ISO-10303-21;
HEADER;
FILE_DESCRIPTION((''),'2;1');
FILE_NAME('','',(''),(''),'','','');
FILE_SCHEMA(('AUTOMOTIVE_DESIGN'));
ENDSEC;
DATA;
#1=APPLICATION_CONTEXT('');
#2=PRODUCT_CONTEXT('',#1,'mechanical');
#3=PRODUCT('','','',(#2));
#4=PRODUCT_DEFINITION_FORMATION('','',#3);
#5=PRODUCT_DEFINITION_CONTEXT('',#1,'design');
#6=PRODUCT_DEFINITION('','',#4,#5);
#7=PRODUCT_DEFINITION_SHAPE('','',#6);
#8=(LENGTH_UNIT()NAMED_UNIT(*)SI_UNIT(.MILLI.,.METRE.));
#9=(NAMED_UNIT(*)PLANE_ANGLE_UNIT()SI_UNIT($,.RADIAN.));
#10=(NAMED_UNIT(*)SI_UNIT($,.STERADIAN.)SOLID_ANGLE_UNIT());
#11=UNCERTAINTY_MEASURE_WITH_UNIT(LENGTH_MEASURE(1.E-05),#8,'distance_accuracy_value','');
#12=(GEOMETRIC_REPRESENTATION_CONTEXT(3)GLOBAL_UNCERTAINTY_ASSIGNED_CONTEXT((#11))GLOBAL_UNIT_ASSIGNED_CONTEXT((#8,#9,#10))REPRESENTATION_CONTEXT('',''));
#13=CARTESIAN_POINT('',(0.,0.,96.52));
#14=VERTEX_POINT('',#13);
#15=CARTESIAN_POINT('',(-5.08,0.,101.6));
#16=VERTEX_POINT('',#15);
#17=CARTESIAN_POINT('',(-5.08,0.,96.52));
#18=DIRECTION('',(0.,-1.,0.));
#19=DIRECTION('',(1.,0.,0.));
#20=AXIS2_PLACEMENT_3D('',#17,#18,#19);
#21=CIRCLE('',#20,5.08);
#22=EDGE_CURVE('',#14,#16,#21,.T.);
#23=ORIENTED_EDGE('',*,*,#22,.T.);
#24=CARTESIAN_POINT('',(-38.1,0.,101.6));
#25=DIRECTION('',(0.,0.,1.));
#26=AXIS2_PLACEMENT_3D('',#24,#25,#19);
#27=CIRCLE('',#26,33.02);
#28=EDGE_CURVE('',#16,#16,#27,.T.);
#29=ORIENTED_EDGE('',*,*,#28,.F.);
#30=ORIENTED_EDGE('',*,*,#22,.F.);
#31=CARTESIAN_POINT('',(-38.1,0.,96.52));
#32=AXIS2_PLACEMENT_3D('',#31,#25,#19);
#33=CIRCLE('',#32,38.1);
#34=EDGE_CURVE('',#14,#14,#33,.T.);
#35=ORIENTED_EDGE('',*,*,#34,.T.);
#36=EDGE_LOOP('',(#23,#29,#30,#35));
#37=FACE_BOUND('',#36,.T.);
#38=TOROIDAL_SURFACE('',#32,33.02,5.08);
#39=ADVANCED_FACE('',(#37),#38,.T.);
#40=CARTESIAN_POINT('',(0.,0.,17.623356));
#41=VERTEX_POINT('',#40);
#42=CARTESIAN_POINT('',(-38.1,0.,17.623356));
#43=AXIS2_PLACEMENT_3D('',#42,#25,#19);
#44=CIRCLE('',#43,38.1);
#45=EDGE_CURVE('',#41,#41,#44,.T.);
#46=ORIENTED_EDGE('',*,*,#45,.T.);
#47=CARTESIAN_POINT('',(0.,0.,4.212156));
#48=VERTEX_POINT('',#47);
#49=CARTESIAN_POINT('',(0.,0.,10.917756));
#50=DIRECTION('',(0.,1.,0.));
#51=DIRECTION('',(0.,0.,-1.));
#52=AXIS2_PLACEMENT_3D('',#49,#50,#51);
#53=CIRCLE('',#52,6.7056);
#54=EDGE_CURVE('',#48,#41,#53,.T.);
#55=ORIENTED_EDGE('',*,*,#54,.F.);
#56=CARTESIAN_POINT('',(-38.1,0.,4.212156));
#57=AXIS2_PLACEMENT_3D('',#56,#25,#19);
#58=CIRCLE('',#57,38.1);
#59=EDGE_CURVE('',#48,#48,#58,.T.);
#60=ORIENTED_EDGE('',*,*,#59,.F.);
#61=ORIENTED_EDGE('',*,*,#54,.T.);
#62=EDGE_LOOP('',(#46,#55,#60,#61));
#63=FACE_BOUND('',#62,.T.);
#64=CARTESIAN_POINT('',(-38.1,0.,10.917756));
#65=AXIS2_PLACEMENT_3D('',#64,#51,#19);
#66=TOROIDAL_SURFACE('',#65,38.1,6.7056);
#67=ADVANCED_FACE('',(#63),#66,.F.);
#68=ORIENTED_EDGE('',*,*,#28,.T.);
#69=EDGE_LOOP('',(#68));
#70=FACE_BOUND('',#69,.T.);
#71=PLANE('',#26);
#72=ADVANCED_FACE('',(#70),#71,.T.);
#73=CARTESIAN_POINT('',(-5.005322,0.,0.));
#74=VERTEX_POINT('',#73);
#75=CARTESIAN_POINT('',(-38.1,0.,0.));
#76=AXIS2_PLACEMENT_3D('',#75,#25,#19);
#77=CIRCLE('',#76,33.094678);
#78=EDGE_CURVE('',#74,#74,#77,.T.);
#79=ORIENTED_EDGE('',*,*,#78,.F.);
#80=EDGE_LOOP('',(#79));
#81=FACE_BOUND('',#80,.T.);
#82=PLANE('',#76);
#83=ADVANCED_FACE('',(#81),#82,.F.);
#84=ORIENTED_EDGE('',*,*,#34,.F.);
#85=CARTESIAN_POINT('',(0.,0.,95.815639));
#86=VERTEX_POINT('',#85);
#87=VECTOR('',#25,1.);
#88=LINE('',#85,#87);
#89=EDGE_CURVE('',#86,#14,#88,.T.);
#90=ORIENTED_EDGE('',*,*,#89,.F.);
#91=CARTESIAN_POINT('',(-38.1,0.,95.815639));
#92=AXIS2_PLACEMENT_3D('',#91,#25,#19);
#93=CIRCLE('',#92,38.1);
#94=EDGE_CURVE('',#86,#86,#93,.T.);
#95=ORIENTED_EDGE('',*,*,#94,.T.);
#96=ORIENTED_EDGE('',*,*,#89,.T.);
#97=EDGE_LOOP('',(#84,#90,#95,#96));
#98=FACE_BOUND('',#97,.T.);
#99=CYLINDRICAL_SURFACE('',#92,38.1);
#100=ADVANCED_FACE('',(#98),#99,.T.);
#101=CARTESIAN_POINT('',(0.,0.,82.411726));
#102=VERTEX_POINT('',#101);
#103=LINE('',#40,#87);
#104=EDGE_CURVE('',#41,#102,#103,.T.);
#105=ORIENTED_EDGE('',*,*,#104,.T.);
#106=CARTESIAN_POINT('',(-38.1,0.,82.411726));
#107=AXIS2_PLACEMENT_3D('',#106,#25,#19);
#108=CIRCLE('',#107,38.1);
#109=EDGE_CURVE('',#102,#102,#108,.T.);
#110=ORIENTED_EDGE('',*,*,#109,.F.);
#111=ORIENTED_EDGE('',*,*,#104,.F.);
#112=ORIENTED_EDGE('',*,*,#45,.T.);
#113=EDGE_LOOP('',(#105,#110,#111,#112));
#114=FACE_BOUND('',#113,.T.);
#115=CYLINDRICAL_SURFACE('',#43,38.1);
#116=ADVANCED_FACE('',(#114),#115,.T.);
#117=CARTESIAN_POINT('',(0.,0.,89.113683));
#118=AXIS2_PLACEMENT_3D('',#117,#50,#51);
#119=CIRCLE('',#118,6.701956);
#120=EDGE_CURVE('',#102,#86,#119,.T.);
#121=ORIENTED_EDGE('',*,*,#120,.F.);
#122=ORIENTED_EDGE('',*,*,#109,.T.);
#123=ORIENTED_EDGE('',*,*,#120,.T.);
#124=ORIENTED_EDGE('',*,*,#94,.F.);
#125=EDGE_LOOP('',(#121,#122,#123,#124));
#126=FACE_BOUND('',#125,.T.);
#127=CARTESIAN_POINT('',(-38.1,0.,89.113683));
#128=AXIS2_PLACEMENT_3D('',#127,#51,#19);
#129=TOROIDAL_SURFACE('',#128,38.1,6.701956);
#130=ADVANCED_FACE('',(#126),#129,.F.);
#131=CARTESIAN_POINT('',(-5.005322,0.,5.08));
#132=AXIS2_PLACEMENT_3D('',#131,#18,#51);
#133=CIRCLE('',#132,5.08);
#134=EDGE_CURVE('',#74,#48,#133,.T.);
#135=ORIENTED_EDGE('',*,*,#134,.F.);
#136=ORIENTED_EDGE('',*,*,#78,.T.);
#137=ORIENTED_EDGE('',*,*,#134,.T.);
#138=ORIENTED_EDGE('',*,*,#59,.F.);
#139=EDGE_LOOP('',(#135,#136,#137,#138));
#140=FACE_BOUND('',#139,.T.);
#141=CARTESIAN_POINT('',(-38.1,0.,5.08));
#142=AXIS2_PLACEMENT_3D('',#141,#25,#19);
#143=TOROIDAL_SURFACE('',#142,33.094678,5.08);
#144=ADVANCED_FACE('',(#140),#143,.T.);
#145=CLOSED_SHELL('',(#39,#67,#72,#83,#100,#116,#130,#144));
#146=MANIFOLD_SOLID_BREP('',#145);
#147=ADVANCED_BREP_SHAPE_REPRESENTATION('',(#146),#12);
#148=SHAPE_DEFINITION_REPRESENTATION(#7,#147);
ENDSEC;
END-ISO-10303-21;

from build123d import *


# Not quite as in the source:
# - a fillet or chamfer that OpenCascade refuses, or shapes differently, is made with other operations: its cross-section is extruded or revolved along the edge and cut away or added


with BuildPart() as f1:
    # F0 (on Front) → F1 (revolve)
    with BuildSketch(Plane.XZ):
        with BuildLine():
            Line((-38.1, 0), (0, 0))
            Line((0, 0), (0, 4.2121557752))
            ThreePointArc((0, 4.2121557752), (-6.7056, 10.9177557752), (0, 17.6233557752))
            Line((0, 17.6233557752), (0, 82.4117260776))
            ThreePointArc((0, 82.4117260776), (-6.7019564309, 89.1136825085), (0, 95.8156389394))
            Line((0, 95.8156389394), (0, 101.6))
            Line((0, 101.6), (-38.1, 101.6))
            Line((-38.1, 101.6), (-38.1, 0))
        make_face()
    revolve(axis=Axis((-38.1, 0, 50.8), (0, 0, 1)))

    # F2: fillet of radius 5.08 on 2 edges, made by hand

    # F2_s1 → F2_t2 (revolve, cut)
    with BuildSketch(Plane.XZ):
        with BuildLine():
            ThreePointArc((0, 96.52), (-1.4878975516, 100.1121024484), (-5.08, 101.6))
            Line((-5.08, 101.6), (0, 101.6))
            Line((0, 101.6), (0, 96.52))
        make_face()
    revolve(axis=Axis((-38.1, 0, 101.6), (0, 0, 1)), mode=Mode.SUBTRACT)

    # F2_s3 → F2_t4 (revolve, cut)
    with BuildSketch(Plane.XZ):
        with BuildLine():
            ThreePointArc((-5.005321808, 0), (-1.7344082248, 1.1931601099), (0, 4.2121557752))
            Line((0, 4.2121557752), (0, 0))
            Line((0, 0), (-5.005321808, 0))
        make_face()
    revolve(axis=Axis((-38.1, 0, 0), (0, 0, 1)), mode=Mode.SUBTRACT)


solid = f1.part
